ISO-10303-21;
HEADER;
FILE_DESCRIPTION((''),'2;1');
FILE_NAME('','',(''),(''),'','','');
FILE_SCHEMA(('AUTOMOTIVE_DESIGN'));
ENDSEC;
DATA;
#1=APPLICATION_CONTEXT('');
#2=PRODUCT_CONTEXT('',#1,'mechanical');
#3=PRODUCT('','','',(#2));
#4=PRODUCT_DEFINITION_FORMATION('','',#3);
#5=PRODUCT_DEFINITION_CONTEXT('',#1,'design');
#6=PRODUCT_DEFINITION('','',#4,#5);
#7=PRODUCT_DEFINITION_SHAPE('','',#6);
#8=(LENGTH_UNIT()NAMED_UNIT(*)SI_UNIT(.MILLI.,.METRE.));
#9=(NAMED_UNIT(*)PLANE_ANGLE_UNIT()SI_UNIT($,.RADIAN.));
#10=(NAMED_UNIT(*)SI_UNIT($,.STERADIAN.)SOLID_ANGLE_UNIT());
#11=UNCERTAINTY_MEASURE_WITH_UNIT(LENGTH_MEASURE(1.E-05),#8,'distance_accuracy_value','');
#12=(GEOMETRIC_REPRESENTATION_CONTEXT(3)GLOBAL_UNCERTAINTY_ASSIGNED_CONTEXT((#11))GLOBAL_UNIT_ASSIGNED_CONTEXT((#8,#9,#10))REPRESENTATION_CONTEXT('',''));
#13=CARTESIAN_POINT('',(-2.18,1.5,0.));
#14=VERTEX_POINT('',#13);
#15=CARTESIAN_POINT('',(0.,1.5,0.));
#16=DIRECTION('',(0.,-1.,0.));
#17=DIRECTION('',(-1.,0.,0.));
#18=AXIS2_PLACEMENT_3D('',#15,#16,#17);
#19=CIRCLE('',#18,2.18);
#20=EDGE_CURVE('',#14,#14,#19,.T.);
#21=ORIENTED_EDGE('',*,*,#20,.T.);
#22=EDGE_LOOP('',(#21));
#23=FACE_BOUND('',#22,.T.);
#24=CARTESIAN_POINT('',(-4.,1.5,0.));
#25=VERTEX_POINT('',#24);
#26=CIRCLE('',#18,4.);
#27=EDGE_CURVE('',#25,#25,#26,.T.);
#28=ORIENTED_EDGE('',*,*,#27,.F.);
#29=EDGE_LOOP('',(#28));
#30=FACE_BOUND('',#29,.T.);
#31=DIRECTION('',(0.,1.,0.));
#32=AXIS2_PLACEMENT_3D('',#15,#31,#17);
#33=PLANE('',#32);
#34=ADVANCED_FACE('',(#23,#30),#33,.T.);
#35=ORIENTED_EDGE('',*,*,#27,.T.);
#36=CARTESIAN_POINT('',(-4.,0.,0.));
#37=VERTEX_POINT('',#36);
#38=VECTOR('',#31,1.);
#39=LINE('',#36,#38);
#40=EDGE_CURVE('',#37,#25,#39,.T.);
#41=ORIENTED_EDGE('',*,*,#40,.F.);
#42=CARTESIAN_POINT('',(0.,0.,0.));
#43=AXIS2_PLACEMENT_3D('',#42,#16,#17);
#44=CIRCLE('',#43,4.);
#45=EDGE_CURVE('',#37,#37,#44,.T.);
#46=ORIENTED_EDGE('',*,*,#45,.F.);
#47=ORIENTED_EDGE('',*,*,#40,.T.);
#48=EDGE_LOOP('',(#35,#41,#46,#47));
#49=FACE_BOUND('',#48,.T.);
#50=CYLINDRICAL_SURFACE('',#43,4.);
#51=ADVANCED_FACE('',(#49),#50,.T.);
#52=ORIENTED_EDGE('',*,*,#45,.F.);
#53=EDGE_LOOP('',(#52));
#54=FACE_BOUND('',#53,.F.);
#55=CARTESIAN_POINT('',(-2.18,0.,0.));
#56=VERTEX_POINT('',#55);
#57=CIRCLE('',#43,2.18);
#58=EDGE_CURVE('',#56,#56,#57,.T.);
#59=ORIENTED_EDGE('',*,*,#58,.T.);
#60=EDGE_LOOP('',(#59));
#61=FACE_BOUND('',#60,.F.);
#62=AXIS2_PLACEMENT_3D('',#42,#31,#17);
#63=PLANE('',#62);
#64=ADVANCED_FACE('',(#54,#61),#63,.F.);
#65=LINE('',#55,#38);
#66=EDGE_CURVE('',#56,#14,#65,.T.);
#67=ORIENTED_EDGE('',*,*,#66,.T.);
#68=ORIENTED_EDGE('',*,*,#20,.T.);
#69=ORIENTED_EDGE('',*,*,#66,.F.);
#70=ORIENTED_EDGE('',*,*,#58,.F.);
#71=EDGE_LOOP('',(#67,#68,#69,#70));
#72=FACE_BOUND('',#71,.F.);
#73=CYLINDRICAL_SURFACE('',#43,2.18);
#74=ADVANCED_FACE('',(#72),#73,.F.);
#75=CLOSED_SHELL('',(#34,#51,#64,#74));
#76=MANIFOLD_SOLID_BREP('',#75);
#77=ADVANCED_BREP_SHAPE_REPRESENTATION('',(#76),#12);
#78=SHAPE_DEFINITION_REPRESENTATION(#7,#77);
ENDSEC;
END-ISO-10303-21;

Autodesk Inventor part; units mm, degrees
ref_plane "YZ Plane" through (0, 0, 0) normal (1, 0, 0) x (0, 1, 0)
ref_plane "XZ Plane" through (0, 0, 0) normal (0, 1, 0) x (-1, 0, 0)
ref_plane "XY Plane" through (0, 0, 0) normal (0, 0, 1) x (1, 0, 0)
sketch "Sketch1" plane through (0, 0, 0) normal (0, 1, 0) x (-1, 0, 0)
  circle A0 centre (0, 0) radius 2
  circle A1 centre (0, 0) radius 4
  dimension "d0" = 4
  dimension "d1" = 8
extrude "Extrusion1" add sketch "Sketch1" along normal blind 1.5
offset faces "Size1" outward -0.18 faces at (-1.9935, 1, -0.1609)
properties part number "Front_Wheel_Support_2_Test"
